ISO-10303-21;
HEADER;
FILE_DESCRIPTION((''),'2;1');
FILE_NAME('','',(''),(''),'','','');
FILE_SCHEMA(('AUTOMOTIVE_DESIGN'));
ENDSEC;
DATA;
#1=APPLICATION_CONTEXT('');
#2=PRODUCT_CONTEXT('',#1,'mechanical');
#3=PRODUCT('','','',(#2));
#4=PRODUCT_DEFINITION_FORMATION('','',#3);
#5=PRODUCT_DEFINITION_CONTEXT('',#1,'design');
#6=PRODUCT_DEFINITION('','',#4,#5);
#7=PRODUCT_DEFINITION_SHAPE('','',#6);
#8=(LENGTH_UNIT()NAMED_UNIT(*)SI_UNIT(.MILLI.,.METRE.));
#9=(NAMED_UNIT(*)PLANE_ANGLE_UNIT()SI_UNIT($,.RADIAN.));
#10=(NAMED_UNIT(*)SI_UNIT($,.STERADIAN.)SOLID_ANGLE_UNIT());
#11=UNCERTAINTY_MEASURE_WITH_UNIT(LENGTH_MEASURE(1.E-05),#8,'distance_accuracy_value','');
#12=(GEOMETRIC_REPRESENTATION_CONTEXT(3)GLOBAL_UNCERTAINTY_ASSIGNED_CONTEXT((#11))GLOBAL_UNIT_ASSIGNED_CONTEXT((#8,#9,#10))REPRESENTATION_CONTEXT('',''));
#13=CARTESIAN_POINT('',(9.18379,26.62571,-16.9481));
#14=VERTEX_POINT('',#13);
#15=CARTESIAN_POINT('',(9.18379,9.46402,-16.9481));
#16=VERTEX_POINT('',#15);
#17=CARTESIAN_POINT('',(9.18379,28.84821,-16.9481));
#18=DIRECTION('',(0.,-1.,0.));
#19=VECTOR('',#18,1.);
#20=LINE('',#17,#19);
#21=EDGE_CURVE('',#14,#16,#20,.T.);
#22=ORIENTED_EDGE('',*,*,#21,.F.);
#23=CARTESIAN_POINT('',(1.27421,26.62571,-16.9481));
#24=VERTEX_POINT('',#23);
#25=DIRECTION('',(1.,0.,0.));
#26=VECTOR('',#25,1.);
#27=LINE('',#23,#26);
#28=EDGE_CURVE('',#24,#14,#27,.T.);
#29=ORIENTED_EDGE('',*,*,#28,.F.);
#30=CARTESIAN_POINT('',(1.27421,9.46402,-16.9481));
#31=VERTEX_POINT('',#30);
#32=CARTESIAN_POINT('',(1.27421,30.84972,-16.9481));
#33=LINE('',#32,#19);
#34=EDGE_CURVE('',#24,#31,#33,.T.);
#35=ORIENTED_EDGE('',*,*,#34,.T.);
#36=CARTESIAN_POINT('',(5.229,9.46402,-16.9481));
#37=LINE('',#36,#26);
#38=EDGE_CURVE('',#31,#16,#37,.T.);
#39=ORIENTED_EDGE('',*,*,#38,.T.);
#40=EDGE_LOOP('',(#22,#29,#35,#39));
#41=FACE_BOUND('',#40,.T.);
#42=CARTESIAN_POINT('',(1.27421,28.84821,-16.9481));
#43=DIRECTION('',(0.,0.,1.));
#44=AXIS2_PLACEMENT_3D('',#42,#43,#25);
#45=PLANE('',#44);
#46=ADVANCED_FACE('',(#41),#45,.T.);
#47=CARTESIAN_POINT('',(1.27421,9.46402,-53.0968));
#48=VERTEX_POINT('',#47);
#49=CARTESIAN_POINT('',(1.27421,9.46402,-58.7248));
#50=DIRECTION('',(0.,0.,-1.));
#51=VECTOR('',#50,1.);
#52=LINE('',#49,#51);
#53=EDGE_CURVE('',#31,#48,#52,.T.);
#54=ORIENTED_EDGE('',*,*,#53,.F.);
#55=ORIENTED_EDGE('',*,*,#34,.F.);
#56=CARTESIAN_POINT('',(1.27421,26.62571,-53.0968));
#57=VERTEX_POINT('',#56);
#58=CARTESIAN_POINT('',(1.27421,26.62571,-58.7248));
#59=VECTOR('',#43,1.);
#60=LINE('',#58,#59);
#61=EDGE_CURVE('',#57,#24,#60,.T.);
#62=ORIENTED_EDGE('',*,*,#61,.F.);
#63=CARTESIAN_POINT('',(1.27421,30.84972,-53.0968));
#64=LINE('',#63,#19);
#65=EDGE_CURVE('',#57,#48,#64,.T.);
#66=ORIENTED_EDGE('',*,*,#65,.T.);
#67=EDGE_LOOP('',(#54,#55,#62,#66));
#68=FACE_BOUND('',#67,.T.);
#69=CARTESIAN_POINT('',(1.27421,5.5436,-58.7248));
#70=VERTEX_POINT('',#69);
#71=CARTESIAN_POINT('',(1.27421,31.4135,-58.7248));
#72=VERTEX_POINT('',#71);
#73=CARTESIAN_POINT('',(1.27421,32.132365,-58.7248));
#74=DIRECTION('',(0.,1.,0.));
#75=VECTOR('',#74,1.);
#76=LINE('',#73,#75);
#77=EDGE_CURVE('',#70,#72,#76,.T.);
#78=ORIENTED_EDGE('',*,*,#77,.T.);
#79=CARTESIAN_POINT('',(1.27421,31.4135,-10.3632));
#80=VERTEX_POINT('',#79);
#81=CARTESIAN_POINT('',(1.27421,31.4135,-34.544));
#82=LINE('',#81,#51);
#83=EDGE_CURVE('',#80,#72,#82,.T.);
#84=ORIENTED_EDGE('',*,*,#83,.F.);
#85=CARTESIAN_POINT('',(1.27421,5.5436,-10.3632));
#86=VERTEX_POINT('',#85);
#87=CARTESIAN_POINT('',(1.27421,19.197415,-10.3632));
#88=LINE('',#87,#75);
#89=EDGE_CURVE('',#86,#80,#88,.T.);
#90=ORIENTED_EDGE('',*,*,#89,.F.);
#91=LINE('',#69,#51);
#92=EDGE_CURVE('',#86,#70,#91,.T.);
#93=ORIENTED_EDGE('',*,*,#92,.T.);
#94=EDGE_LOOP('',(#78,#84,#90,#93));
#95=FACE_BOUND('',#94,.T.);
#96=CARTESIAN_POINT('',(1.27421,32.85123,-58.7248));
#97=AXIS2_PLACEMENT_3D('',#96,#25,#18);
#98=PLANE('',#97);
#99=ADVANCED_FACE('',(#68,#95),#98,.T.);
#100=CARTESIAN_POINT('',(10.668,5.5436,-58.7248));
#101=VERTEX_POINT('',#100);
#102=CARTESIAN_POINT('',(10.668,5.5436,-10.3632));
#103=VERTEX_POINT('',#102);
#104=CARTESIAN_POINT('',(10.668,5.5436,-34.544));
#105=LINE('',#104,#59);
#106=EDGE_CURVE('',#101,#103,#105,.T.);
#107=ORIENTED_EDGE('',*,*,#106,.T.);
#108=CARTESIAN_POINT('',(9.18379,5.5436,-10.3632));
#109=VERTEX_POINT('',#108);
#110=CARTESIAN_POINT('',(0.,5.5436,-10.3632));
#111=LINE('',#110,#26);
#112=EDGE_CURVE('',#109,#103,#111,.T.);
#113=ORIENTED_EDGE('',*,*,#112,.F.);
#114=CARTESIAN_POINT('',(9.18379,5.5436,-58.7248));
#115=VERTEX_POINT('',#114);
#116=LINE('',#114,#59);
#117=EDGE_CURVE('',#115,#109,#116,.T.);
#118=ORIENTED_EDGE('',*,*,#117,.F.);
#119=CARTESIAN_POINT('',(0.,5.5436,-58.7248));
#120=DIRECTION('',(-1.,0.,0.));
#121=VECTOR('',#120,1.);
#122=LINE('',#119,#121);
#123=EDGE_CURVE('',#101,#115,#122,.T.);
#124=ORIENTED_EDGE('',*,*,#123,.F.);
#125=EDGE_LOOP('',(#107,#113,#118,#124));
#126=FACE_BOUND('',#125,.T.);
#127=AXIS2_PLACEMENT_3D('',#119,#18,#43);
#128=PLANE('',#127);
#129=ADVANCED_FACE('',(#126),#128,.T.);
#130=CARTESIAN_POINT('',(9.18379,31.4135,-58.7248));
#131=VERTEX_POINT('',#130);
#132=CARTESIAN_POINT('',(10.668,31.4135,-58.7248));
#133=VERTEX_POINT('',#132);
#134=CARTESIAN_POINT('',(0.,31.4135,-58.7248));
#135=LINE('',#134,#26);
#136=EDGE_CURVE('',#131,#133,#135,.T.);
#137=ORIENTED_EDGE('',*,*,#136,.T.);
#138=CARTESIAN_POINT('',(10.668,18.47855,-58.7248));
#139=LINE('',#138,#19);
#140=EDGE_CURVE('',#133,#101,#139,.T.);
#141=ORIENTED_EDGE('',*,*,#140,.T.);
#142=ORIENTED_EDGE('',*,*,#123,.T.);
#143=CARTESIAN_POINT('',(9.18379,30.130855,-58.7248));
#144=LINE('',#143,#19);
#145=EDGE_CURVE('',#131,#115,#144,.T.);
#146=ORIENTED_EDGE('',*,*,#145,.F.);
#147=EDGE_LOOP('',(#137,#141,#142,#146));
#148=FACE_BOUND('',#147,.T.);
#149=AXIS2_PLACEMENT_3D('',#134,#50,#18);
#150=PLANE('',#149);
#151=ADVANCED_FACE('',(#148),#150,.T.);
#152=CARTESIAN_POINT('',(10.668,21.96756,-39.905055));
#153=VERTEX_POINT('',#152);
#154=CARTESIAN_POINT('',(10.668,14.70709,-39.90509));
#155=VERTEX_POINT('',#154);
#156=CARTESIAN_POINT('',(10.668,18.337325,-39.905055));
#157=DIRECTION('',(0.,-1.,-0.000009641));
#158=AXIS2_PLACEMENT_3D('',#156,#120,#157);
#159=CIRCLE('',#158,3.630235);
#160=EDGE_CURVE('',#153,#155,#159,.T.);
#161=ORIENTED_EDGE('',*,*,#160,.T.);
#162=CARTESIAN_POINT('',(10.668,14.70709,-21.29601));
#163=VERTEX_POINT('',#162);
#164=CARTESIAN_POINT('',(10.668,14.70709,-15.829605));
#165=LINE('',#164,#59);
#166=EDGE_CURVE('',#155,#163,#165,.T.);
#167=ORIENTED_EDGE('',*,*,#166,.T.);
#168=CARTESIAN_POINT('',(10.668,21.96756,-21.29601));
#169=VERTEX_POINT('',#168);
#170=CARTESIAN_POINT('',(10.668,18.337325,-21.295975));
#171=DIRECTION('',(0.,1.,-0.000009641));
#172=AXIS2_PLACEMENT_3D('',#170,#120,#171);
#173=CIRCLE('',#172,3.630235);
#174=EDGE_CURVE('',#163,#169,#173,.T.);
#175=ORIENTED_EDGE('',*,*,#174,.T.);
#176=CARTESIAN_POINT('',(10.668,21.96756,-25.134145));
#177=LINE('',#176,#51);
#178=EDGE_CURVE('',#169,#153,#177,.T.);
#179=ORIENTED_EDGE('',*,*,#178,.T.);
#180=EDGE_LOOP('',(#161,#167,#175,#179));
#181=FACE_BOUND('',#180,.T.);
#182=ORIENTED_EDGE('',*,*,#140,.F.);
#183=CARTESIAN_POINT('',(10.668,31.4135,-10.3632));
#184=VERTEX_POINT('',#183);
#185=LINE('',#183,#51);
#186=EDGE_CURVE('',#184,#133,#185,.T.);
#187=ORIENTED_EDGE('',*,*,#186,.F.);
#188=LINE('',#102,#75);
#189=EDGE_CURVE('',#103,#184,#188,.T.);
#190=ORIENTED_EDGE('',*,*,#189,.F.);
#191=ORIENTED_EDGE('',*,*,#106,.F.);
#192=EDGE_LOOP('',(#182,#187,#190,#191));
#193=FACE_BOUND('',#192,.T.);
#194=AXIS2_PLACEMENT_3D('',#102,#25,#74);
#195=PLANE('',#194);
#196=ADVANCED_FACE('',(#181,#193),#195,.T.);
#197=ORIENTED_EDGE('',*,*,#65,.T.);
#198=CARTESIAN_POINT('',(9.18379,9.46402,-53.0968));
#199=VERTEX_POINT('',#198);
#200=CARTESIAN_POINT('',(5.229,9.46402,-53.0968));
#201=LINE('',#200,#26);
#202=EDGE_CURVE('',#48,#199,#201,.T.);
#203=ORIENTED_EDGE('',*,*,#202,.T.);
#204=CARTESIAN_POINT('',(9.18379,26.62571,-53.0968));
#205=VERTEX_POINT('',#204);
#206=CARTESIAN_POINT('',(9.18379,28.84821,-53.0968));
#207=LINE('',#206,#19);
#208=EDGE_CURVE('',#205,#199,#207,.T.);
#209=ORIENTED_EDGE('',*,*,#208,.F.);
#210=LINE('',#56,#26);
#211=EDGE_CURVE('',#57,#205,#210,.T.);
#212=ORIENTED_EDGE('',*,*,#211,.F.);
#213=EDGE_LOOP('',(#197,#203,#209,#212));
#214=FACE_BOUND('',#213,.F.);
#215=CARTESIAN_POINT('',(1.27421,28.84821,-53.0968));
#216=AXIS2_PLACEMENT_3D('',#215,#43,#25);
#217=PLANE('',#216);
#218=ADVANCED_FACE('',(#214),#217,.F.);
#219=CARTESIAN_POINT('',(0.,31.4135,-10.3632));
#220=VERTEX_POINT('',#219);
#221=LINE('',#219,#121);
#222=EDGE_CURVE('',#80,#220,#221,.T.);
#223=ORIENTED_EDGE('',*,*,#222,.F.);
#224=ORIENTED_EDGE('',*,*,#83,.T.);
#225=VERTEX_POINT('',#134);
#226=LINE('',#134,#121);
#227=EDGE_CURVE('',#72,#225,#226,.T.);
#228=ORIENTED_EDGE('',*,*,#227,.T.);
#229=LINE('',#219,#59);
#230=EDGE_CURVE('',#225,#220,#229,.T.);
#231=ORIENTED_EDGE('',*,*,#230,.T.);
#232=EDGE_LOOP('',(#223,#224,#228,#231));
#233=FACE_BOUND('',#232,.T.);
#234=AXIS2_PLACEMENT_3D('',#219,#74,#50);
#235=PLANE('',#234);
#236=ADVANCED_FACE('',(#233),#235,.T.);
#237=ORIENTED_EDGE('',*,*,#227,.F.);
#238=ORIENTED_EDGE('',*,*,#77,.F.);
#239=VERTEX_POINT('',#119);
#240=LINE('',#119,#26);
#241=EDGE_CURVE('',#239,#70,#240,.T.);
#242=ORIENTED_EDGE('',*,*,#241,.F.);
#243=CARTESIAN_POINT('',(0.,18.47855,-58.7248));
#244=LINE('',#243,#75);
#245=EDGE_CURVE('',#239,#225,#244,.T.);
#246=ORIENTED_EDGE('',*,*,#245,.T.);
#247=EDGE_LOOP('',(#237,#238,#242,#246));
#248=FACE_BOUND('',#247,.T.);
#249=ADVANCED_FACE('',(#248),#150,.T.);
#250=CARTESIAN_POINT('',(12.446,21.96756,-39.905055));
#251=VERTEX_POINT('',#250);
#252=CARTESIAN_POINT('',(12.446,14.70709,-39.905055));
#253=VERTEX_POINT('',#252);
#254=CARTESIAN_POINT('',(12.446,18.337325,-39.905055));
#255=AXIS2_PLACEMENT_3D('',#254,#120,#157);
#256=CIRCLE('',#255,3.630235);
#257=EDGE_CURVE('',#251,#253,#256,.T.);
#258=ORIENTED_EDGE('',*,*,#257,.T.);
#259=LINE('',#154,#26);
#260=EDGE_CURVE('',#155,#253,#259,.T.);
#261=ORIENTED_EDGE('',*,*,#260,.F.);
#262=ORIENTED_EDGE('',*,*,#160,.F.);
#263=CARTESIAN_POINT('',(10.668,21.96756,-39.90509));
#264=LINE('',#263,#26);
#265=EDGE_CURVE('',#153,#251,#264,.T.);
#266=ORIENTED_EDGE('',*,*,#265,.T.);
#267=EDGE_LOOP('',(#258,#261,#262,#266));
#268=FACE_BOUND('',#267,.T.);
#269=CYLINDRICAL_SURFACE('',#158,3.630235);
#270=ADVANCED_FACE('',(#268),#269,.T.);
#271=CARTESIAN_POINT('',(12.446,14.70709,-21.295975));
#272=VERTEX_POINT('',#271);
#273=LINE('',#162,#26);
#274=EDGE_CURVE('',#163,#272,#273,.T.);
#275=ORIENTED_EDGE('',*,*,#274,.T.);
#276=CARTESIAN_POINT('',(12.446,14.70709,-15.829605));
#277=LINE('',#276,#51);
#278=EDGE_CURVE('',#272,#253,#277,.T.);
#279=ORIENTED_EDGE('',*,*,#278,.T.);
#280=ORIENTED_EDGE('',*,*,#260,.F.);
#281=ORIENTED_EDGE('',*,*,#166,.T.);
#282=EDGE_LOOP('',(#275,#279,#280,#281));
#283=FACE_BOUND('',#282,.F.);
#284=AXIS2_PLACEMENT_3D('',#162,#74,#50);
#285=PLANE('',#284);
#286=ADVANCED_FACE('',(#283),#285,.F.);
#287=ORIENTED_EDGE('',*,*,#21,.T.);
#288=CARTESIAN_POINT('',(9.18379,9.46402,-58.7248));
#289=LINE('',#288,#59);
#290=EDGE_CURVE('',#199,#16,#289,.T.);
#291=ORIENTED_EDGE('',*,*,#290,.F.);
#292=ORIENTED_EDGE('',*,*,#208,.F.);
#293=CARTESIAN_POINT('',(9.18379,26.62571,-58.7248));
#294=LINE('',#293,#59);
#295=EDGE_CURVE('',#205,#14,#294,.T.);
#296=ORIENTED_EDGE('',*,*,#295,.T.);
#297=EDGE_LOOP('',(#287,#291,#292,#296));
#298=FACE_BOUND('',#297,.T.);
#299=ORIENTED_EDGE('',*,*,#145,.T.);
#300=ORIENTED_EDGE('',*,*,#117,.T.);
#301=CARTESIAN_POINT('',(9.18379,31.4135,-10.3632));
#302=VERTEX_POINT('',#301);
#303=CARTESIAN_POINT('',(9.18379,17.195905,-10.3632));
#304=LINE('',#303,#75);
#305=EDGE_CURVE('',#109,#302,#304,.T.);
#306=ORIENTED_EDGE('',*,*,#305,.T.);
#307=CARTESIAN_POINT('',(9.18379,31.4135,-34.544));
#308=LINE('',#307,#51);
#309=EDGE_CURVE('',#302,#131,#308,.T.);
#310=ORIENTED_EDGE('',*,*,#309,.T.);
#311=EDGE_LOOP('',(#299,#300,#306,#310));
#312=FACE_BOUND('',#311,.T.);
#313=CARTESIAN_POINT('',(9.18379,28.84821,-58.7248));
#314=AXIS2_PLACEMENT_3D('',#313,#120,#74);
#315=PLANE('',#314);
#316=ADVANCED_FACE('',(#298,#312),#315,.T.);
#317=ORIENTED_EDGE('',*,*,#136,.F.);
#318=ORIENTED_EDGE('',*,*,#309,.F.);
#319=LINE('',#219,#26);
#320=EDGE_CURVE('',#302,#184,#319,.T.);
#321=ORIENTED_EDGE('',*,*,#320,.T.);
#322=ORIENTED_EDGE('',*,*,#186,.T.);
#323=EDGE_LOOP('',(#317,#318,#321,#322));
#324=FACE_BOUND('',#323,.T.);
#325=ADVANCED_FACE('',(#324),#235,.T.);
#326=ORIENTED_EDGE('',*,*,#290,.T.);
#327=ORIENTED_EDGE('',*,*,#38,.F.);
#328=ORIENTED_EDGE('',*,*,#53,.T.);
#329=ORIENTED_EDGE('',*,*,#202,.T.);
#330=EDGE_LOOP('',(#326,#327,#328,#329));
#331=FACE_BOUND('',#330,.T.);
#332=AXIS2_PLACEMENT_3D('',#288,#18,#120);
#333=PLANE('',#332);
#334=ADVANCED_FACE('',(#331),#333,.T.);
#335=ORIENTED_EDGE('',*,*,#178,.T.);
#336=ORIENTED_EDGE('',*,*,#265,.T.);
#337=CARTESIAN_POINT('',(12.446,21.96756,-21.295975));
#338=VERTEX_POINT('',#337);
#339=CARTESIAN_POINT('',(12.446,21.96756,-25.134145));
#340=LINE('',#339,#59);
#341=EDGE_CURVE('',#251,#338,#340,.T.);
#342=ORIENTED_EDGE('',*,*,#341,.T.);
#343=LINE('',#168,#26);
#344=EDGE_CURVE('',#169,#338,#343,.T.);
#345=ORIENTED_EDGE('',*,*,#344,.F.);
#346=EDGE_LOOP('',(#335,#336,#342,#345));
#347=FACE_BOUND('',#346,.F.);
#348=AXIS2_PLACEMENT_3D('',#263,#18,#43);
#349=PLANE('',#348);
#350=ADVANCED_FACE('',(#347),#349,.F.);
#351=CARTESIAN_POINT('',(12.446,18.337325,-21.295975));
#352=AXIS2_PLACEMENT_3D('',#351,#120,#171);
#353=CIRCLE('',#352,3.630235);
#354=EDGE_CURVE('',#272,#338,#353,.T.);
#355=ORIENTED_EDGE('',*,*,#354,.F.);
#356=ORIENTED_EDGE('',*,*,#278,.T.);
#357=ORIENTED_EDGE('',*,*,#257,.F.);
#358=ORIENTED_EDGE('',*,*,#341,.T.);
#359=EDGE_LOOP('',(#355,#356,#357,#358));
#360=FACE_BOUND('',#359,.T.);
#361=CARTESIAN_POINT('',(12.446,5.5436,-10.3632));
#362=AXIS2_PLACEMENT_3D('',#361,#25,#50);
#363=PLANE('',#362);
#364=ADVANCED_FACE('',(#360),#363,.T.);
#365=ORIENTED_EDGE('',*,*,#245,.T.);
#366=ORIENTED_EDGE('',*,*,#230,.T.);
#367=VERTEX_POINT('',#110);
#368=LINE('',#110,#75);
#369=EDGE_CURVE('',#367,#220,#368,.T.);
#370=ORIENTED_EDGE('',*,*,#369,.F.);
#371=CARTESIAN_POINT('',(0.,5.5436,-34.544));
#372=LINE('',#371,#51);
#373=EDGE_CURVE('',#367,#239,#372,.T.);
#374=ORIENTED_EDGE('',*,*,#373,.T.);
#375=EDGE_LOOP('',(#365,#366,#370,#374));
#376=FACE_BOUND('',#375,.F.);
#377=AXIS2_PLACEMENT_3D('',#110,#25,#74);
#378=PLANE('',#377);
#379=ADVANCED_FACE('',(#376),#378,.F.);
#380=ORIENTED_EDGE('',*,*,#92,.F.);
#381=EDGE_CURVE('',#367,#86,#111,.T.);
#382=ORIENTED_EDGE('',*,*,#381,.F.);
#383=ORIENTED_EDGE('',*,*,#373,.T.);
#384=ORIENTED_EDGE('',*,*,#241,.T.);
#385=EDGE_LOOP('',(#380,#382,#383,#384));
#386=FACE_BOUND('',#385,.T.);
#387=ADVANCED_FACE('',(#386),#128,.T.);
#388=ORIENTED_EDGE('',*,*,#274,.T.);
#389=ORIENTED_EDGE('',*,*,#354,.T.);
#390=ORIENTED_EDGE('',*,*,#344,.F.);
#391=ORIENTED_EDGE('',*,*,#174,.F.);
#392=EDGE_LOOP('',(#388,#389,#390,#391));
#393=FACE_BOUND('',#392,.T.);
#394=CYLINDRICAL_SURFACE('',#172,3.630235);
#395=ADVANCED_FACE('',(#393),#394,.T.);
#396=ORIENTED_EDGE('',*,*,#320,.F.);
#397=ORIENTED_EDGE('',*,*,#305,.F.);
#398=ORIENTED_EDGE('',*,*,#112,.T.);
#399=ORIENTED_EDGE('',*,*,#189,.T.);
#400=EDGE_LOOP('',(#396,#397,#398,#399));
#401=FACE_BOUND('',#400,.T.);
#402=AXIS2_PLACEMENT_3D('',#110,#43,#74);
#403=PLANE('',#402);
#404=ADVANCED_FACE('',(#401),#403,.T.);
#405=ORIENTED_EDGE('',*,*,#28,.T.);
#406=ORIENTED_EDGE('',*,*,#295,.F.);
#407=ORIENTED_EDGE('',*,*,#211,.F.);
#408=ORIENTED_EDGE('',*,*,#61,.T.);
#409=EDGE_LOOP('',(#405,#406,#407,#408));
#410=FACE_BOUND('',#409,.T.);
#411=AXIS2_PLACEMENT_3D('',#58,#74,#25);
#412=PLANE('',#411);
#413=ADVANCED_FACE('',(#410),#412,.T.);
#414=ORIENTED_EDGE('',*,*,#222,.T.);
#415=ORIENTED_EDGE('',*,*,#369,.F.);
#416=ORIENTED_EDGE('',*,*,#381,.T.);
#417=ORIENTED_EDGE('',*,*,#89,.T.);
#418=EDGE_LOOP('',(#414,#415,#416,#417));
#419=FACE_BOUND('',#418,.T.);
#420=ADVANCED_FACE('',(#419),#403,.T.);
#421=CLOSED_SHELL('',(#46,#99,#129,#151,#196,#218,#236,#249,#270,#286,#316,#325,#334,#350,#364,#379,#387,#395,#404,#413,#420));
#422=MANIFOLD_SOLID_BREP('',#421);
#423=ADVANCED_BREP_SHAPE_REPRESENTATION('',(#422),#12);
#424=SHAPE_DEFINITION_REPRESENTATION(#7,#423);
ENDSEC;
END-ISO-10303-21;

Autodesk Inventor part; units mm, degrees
ref_plane "YZ Plane" through (0, 0, 0) normal (1, 0, 0) x (0, 1, 0)
ref_plane "XZ Plane" through (0, 0, 0) normal (0, 1, 0) x (-1, 0, 0)
ref_plane "XY Plane" through (0, 0, 0) normal (0, 0, 1) x (1, 0, 0)
sketch "Sketch1" plane through (0, 0, 0) normal (1, 0, 0) x (0, 1, 0)
  line L0 (0, 0) -> (36.957, 0)
  line L1 (36.957, 0) -> (36.957, -69.088)
  line L2 (36.957, -69.088) -> (0, -69.088)
  line L3 (0, -69.088) -> (0, 0)
  dimension "d0" = 69.088
  dimension "d1" = 36.957
extrude "Extrusion1" add sketch "Sketch1" along normal blind 15.24
sketch "Sketch2" plane through (15.24, 0, 0) normal (1, 0, 0) x (0, 0, -1)
  line L0 (15.6183, 18.2767) -> (42.2027, 18.2767) construction
  line L1 (15.6183, 13.0907) -> (42.2027, 13.0907)
  line L2 (42.2027, 23.4628) -> (15.6183, 23.4628)
  arc A0 (15.6183, 23.4628) -> (15.6183, 13.0907) centre (15.6183, 18.2767) ccw
  arc A1 (42.2027, 13.0907) -> (42.2027, 23.4628) centre (42.2027, 18.2767) ccw
  point P0 (0, 0)
  point P1 (28.9105, 18.2767)
extrude "Extrusion2" add sketch "Sketch2" along normal blind 2.54
sketch "Sketch3" plane through (0, 0, -69.088) normal (0, 0, -1) x (-1, 0, 0)
  line L0 (-1.8203, -2.1906) -> (-13.1197, -2.1906)
  line L1 (-13.1197, -2.1906) -> (-13.1197, 2.4256)
  line L2 (-13.1197, 2.4256) -> (-1.8203, 2.4256)
  line L3 (-1.8203, 2.4256) -> (-1.8203, -2.1906)
  line L4 (-13.1197, 39.0109) -> (-1.8203, 39.0109)
  line L5 (-1.8203, 39.0109) -> (-1.8203, 33.2923)
  line L6 (-1.8203, 33.2923) -> (-13.1197, 33.2923)
  line L7 (-13.1197, 33.2923) -> (-13.1197, 39.0109)
  point P0 (0, 0)
extrude "Extrusion3" cut sketch "Sketch3" against normal blind 136.525
sketch "Sketch4" plane through (1.8203, 33.2923, -69.088) normal (0, 1, 0) x (1, 0, 0)
  line L0 (11.2994, 0) -> (11.2994, -69.088) projected
  line L1 (0, 0) -> (0, -69.088) projected
  line L2 (11.2994, 0) -> (0, 0)
  line L3 (0, 0) -> (0, -4.865)
  line L4 (0, -4.865) -> (11.2994, -4.865)
  line L5 (11.2994, -4.865) -> (11.2994, 0)
  line L6 (11.2994, -69.088) -> (13.4197, -69.088) projected
  line L7 (11.2994, -69.088) -> (0, -69.088)
  line L8 (0, -69.088) -> (0, -62.856)
  line L9 (0, -62.856) -> (11.2994, -62.856)
  line L10 (11.2994, -62.856) -> (11.2994, -69.088)
  point P0 (-1.8203, -69.088)
extrude "Extrusion4" cut sketch "Sketch4" against normal blind 136.525 contours L0 L4 L1 L2 | L0 L7 L1 L9
offset faces "Size1" outward -3.175 faces at (9.3532, 2.4256, -25.5623) (9.3532, 23.0034, -6.232) (5.5868, 33.2923, -44.8927) (5.5868, 23.0034, -64.223)
scale "Scale1" factors (0.7, 0.7, 0.7) then translate (0, 5.5436, -10.3632) bodies 1
properties part number "co2sensor"
